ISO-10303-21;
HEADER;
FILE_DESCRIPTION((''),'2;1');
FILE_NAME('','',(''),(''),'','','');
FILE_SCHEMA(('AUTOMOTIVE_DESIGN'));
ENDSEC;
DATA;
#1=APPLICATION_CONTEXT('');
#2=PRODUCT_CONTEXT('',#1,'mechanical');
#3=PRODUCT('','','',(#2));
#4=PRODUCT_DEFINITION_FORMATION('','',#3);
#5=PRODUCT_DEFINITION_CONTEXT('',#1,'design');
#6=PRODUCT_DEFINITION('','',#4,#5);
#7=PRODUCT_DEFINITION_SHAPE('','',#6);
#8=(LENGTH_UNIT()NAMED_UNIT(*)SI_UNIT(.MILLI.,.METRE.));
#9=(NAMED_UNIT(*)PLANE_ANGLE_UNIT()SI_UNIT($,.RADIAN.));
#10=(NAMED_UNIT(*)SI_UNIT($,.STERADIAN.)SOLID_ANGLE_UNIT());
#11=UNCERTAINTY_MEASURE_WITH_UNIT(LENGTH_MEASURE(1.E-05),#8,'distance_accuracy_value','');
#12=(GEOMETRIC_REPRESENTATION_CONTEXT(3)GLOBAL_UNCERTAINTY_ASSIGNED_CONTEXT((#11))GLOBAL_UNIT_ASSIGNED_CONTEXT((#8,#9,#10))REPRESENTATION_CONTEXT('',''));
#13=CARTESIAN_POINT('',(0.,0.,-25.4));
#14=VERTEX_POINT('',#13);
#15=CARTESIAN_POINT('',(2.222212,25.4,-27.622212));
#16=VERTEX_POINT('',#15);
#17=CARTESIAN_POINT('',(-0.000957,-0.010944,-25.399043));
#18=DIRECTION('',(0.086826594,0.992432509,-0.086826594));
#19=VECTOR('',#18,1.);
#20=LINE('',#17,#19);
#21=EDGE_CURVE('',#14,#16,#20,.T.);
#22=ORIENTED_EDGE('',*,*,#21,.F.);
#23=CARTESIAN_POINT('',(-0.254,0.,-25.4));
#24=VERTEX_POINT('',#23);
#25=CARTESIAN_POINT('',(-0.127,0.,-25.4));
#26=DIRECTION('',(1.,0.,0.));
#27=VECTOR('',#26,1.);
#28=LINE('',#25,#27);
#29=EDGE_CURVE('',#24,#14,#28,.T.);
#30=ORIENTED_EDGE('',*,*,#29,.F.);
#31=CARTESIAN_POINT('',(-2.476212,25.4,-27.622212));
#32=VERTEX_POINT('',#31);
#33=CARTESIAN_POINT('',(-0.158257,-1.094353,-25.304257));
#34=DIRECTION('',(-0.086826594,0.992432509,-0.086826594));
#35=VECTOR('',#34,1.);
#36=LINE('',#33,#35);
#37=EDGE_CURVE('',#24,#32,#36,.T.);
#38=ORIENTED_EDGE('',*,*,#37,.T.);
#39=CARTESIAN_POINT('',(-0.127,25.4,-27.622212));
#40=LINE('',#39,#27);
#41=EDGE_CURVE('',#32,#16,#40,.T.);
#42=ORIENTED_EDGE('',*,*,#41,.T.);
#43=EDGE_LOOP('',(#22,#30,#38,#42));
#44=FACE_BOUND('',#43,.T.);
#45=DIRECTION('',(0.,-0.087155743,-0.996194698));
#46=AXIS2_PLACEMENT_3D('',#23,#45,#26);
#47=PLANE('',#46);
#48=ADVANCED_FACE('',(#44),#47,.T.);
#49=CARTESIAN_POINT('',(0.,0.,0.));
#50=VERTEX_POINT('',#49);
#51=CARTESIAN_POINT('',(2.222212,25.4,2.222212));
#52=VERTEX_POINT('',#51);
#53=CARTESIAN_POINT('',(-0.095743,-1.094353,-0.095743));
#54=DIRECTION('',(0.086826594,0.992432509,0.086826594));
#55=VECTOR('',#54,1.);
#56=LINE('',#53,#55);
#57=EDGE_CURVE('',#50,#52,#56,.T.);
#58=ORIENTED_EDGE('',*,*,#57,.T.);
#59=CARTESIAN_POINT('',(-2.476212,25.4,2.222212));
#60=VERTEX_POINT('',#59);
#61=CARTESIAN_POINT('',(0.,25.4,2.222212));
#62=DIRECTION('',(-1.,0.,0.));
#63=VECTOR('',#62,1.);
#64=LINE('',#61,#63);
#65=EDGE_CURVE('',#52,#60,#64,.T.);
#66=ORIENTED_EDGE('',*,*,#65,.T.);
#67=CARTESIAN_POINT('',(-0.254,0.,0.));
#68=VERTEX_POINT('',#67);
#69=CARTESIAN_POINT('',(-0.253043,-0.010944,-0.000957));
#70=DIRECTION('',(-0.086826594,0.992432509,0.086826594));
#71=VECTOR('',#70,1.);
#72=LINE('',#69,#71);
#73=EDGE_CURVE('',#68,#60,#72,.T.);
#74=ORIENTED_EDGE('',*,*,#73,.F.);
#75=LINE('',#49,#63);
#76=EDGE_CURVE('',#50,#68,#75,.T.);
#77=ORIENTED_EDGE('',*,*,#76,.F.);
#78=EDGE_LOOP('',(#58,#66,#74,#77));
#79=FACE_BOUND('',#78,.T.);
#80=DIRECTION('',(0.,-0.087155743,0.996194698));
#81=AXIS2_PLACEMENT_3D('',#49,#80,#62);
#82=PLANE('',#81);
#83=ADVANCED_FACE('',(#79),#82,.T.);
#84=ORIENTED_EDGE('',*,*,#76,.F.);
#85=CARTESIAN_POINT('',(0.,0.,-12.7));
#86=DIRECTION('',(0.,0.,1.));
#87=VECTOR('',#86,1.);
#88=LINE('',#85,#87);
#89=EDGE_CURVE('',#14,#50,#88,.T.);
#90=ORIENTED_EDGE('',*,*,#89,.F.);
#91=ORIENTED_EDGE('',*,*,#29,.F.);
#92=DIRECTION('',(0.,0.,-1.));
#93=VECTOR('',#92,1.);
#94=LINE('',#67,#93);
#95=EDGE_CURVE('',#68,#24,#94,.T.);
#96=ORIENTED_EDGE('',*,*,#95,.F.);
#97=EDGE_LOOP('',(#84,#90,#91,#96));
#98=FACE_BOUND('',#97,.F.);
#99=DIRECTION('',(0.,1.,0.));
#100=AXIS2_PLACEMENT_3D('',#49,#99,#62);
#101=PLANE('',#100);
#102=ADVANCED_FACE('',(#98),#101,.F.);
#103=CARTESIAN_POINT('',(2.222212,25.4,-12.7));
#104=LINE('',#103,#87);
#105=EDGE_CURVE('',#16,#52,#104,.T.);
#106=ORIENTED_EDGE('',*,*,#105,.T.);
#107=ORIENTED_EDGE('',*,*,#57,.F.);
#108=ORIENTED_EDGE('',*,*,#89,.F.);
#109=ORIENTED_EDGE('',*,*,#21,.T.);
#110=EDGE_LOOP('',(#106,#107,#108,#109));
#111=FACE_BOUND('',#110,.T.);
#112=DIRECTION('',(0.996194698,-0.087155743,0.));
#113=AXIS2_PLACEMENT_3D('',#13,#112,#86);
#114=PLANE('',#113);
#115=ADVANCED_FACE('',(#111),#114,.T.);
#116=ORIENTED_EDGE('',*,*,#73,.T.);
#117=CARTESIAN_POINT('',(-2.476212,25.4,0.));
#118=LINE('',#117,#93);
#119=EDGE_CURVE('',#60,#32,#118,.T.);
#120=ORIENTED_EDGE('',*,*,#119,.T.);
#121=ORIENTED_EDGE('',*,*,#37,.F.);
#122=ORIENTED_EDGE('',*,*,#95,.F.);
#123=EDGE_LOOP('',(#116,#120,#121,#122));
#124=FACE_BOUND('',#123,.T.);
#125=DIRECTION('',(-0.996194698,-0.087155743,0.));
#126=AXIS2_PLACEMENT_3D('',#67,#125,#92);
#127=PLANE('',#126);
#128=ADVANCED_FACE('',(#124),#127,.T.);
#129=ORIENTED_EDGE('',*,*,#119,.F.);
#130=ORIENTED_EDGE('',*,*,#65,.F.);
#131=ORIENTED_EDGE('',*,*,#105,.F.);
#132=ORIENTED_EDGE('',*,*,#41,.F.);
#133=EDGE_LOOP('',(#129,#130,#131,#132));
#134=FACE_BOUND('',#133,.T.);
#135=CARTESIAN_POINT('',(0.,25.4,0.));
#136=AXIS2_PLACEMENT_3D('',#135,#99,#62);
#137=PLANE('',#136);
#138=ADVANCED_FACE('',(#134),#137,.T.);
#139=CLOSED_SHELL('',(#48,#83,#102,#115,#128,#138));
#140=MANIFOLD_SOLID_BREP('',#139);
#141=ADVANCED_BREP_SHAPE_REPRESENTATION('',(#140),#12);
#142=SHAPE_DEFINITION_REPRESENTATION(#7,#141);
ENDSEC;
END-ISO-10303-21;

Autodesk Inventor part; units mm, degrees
ref_plane "YZ Plane" through (0, 0, 0) normal (1, 0, 0) x (0, 1, 0)
ref_plane "XZ Plane" through (0, 0, 0) normal (0, 1, 0) x (-1, 0, 0)
ref_plane "XY Plane" through (0, 0, 0) normal (0, 0, 1) x (1, 0, 0)
sketch "Sketch1" plane through (0, 0, 0) normal (0, 1, 0) x (-1, 0, 0)
  line L0 (0, 0) -> (0.254, 0)
  line L1 (0.254, 0) -> (0.254, -25.4)
  line L2 (0.254, -25.4) -> (0, -25.4)
  line L3 (0, -25.4) -> (0, 0)
  dimension "d0" = 0.254
  dimension "d1" = 25.4
extrude "Extrusion1" add sketch "Sketch1" along normal blind 25.4 draft 5
properties part number "blade"
